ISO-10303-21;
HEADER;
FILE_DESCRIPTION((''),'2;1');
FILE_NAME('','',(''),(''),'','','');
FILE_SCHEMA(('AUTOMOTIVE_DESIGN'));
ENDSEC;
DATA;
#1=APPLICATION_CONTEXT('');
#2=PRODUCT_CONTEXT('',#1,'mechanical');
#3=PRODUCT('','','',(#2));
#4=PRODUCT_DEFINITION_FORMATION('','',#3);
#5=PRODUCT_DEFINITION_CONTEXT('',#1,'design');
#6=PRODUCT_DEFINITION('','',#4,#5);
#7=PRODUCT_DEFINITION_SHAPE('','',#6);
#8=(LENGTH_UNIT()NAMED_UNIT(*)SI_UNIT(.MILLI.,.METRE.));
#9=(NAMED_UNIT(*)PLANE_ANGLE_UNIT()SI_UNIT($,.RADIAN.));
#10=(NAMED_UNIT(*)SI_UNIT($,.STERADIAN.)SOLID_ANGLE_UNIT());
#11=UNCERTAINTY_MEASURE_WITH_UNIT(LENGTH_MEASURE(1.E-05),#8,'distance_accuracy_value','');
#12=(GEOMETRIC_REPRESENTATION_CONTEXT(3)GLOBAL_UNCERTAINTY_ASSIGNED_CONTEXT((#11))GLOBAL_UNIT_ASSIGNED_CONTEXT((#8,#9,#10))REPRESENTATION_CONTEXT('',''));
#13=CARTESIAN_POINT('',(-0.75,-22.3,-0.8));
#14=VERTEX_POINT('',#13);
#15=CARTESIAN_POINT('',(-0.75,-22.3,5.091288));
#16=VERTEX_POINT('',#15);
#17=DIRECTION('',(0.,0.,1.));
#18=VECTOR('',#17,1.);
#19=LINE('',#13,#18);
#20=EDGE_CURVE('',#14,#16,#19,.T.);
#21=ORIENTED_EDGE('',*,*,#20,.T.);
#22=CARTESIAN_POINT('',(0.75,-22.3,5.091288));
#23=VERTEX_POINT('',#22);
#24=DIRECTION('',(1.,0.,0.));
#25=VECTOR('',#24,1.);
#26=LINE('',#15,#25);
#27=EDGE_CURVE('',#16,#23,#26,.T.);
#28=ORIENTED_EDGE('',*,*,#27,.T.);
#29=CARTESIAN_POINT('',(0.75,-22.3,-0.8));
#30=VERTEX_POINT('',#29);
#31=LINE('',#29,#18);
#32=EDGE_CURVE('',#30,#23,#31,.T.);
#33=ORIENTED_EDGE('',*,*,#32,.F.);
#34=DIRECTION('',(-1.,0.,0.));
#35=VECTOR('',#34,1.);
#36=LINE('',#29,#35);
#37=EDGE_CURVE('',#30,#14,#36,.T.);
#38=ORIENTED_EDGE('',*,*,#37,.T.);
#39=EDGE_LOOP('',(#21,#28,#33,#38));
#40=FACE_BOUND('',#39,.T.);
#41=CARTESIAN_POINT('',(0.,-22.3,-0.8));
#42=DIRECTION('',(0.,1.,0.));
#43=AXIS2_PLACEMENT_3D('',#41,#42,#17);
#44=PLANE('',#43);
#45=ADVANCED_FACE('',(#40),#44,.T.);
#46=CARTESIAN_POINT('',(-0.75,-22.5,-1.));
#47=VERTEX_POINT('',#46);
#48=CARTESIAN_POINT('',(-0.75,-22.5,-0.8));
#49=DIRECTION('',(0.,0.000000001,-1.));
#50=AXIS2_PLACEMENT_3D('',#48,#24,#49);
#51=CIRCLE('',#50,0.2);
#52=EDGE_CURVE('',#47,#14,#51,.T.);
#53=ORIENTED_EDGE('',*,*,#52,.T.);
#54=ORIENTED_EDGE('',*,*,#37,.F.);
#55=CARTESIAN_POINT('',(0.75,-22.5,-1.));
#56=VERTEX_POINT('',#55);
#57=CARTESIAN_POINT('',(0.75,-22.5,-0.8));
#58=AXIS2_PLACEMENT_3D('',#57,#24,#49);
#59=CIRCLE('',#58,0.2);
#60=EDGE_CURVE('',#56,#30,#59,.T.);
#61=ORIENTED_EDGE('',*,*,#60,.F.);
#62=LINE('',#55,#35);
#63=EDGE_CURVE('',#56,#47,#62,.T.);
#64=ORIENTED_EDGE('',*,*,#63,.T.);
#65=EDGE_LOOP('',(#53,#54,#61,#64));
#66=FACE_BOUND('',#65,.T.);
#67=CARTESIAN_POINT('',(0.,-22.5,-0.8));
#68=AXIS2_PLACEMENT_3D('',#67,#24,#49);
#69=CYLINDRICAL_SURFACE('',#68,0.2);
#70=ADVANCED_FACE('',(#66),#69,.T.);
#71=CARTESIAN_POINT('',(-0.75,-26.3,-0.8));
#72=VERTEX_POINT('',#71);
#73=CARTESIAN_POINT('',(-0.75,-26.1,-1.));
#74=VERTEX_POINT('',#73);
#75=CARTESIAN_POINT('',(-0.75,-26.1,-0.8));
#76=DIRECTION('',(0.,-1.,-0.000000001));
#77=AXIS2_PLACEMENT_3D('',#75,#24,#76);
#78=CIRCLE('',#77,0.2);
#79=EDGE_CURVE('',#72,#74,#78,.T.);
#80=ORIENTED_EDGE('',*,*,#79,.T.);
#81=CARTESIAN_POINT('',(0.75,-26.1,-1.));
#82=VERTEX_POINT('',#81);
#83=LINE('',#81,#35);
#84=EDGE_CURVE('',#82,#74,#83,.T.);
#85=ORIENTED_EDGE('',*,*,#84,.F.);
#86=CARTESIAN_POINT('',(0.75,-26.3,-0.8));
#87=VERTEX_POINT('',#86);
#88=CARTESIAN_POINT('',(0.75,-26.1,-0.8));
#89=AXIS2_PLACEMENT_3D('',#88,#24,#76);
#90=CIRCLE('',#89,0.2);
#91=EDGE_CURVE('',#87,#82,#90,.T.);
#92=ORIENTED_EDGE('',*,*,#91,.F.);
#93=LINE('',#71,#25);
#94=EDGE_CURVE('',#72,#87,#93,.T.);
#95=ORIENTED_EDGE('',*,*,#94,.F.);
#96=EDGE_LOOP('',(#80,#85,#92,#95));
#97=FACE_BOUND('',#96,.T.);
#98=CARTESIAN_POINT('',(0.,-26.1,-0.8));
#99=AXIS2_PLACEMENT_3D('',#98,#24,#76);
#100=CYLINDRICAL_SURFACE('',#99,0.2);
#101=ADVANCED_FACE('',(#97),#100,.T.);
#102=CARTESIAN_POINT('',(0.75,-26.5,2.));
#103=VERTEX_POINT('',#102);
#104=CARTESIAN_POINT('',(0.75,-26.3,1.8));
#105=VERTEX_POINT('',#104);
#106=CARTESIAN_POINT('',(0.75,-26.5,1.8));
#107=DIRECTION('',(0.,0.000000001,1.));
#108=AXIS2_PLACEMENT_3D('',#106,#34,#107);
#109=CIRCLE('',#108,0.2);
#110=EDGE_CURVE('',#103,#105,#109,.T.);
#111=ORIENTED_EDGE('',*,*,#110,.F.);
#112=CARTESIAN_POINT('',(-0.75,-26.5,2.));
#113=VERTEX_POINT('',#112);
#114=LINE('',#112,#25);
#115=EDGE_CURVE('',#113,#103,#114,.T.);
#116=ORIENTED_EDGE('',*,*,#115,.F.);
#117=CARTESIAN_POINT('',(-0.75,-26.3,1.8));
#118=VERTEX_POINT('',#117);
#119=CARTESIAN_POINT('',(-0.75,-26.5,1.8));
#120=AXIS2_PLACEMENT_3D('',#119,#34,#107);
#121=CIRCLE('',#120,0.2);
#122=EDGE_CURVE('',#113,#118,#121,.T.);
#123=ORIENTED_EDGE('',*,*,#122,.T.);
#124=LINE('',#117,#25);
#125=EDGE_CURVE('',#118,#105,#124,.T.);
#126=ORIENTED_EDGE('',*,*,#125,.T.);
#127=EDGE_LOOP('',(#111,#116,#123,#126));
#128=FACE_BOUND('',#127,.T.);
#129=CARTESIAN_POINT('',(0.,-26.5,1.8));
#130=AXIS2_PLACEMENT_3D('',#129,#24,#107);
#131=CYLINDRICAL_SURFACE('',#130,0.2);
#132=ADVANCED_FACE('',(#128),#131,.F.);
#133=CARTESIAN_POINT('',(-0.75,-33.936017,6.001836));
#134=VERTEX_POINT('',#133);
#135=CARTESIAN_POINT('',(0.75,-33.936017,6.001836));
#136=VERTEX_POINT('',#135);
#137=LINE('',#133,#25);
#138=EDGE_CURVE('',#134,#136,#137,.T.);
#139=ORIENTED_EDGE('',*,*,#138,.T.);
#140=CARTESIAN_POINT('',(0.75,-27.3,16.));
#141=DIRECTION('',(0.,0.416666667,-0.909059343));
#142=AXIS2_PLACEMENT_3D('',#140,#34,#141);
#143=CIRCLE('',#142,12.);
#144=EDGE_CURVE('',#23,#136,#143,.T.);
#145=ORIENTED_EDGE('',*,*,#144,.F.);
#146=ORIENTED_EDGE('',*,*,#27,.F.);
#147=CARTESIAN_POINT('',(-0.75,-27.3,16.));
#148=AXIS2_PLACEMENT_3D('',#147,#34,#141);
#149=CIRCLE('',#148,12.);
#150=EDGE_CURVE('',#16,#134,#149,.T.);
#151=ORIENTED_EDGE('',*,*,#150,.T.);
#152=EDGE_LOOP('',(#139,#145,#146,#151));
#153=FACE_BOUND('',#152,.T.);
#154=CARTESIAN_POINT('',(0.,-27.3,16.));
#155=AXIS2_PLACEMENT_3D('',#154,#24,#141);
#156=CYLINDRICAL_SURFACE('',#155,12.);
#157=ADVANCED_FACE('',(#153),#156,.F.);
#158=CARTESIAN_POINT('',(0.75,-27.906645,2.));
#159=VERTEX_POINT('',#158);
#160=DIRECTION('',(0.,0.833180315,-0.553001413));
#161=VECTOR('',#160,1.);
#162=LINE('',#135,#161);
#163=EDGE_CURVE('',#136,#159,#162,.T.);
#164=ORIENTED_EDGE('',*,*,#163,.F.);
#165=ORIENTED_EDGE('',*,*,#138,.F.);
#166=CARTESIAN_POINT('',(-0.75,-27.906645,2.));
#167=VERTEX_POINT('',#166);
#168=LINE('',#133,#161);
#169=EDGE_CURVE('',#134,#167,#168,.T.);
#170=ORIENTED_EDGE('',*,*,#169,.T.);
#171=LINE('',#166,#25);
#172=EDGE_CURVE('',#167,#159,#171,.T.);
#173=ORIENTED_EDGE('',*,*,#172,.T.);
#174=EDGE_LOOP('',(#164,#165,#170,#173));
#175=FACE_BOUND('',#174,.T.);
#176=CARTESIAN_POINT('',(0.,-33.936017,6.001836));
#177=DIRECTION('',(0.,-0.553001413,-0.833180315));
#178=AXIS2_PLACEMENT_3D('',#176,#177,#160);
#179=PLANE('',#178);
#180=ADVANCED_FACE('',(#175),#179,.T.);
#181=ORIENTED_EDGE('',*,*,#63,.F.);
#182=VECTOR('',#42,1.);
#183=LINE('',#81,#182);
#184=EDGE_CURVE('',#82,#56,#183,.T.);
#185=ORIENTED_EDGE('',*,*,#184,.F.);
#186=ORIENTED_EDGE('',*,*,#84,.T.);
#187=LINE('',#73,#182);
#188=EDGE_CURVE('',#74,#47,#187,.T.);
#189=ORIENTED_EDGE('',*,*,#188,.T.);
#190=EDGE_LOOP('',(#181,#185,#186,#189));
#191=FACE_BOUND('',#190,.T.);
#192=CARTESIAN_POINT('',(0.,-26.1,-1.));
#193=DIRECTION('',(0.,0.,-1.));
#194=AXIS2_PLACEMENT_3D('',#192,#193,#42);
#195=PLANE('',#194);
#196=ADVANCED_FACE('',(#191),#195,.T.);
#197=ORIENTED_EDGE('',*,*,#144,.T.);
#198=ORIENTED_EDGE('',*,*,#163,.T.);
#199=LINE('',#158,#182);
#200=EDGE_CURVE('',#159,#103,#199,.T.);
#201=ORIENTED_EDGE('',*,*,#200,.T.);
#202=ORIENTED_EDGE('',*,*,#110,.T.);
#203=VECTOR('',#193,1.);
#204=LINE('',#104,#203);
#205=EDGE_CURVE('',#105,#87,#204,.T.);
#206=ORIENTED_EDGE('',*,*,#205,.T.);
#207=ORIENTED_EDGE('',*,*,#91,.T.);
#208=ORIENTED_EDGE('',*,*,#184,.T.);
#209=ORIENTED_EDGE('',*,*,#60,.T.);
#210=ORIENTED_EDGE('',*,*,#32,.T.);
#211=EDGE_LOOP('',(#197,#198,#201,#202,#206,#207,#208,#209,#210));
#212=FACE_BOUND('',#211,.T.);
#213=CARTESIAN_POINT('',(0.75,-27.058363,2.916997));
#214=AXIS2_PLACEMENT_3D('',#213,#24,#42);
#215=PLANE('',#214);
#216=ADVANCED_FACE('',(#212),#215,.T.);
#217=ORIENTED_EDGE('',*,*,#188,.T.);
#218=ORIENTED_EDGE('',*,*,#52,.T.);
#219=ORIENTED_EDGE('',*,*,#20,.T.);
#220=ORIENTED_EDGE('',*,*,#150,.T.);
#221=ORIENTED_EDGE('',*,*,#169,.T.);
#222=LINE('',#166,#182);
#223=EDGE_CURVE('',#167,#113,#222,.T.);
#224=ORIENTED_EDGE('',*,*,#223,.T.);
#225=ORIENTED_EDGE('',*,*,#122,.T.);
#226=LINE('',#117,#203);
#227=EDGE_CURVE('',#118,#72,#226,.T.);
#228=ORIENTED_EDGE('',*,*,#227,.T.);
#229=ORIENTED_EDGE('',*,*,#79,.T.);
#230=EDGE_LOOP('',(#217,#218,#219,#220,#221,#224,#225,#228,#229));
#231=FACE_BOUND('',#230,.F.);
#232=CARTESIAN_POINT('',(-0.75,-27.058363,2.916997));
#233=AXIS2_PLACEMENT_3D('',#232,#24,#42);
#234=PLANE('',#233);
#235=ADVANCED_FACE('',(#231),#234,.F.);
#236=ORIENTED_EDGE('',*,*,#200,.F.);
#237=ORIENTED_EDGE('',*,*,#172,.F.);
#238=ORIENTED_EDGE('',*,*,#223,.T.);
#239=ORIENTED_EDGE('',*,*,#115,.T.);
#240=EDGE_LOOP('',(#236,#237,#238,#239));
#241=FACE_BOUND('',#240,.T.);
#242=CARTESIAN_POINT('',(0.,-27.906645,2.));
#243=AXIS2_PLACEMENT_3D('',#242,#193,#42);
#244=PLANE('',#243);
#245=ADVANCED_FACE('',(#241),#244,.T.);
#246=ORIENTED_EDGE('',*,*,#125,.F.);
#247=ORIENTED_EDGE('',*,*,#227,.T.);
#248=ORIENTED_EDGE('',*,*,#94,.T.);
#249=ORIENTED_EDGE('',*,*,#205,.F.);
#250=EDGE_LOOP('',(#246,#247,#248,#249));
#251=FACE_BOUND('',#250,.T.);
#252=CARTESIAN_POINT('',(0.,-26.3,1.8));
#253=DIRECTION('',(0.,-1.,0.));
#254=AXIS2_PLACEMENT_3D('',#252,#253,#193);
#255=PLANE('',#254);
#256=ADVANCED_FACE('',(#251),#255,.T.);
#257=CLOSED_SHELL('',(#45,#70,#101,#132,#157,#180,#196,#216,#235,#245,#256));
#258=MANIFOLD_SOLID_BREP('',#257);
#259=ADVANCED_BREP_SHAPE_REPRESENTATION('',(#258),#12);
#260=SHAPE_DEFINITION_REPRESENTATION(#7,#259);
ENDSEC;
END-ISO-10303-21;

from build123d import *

# Parameters (mm, degrees)
F1_DEPTH = 0.75


# Not quite as in the source:
# - a feature names something its author has since deleted; it is built from what else it names


with BuildPart() as f1:
    # F0 (on Right) → F1 (new body, symmetric)
    with BuildSketch(Plane.YZ):
        with BuildLine():
            Line((-22.3, -0.8), (-22.3, 5.0912878854))
            ThreePointArc((-22.3, 5.0912878854), (-28.2361690228, 4.0365729174), (-33.9360169573, 6.0018362214))
            Line((-33.9360169573, 6.0018362214), (-27.9066450894, 2))
            Line((-27.9066450894, 2), (-26.5, 2))
            ThreePointArc((-26.5, 2), (-26.3585786438, 1.9414213562), (-26.3, 1.8))
            Line((-26.3, 1.8), (-26.3, -0.8))
            ThreePointArc((-26.3, -0.8), (-26.2414213562, -0.9414213562), (-26.1, -1))
            Line((-26.1, -1), (-22.5, -1))
            ThreePointArc((-22.5, -1), (-22.3585786438, -0.9414213562), (-22.3, -0.8))
        make_face()
    extrude(amount=F1_DEPTH, both=True)


solid = f1.part
